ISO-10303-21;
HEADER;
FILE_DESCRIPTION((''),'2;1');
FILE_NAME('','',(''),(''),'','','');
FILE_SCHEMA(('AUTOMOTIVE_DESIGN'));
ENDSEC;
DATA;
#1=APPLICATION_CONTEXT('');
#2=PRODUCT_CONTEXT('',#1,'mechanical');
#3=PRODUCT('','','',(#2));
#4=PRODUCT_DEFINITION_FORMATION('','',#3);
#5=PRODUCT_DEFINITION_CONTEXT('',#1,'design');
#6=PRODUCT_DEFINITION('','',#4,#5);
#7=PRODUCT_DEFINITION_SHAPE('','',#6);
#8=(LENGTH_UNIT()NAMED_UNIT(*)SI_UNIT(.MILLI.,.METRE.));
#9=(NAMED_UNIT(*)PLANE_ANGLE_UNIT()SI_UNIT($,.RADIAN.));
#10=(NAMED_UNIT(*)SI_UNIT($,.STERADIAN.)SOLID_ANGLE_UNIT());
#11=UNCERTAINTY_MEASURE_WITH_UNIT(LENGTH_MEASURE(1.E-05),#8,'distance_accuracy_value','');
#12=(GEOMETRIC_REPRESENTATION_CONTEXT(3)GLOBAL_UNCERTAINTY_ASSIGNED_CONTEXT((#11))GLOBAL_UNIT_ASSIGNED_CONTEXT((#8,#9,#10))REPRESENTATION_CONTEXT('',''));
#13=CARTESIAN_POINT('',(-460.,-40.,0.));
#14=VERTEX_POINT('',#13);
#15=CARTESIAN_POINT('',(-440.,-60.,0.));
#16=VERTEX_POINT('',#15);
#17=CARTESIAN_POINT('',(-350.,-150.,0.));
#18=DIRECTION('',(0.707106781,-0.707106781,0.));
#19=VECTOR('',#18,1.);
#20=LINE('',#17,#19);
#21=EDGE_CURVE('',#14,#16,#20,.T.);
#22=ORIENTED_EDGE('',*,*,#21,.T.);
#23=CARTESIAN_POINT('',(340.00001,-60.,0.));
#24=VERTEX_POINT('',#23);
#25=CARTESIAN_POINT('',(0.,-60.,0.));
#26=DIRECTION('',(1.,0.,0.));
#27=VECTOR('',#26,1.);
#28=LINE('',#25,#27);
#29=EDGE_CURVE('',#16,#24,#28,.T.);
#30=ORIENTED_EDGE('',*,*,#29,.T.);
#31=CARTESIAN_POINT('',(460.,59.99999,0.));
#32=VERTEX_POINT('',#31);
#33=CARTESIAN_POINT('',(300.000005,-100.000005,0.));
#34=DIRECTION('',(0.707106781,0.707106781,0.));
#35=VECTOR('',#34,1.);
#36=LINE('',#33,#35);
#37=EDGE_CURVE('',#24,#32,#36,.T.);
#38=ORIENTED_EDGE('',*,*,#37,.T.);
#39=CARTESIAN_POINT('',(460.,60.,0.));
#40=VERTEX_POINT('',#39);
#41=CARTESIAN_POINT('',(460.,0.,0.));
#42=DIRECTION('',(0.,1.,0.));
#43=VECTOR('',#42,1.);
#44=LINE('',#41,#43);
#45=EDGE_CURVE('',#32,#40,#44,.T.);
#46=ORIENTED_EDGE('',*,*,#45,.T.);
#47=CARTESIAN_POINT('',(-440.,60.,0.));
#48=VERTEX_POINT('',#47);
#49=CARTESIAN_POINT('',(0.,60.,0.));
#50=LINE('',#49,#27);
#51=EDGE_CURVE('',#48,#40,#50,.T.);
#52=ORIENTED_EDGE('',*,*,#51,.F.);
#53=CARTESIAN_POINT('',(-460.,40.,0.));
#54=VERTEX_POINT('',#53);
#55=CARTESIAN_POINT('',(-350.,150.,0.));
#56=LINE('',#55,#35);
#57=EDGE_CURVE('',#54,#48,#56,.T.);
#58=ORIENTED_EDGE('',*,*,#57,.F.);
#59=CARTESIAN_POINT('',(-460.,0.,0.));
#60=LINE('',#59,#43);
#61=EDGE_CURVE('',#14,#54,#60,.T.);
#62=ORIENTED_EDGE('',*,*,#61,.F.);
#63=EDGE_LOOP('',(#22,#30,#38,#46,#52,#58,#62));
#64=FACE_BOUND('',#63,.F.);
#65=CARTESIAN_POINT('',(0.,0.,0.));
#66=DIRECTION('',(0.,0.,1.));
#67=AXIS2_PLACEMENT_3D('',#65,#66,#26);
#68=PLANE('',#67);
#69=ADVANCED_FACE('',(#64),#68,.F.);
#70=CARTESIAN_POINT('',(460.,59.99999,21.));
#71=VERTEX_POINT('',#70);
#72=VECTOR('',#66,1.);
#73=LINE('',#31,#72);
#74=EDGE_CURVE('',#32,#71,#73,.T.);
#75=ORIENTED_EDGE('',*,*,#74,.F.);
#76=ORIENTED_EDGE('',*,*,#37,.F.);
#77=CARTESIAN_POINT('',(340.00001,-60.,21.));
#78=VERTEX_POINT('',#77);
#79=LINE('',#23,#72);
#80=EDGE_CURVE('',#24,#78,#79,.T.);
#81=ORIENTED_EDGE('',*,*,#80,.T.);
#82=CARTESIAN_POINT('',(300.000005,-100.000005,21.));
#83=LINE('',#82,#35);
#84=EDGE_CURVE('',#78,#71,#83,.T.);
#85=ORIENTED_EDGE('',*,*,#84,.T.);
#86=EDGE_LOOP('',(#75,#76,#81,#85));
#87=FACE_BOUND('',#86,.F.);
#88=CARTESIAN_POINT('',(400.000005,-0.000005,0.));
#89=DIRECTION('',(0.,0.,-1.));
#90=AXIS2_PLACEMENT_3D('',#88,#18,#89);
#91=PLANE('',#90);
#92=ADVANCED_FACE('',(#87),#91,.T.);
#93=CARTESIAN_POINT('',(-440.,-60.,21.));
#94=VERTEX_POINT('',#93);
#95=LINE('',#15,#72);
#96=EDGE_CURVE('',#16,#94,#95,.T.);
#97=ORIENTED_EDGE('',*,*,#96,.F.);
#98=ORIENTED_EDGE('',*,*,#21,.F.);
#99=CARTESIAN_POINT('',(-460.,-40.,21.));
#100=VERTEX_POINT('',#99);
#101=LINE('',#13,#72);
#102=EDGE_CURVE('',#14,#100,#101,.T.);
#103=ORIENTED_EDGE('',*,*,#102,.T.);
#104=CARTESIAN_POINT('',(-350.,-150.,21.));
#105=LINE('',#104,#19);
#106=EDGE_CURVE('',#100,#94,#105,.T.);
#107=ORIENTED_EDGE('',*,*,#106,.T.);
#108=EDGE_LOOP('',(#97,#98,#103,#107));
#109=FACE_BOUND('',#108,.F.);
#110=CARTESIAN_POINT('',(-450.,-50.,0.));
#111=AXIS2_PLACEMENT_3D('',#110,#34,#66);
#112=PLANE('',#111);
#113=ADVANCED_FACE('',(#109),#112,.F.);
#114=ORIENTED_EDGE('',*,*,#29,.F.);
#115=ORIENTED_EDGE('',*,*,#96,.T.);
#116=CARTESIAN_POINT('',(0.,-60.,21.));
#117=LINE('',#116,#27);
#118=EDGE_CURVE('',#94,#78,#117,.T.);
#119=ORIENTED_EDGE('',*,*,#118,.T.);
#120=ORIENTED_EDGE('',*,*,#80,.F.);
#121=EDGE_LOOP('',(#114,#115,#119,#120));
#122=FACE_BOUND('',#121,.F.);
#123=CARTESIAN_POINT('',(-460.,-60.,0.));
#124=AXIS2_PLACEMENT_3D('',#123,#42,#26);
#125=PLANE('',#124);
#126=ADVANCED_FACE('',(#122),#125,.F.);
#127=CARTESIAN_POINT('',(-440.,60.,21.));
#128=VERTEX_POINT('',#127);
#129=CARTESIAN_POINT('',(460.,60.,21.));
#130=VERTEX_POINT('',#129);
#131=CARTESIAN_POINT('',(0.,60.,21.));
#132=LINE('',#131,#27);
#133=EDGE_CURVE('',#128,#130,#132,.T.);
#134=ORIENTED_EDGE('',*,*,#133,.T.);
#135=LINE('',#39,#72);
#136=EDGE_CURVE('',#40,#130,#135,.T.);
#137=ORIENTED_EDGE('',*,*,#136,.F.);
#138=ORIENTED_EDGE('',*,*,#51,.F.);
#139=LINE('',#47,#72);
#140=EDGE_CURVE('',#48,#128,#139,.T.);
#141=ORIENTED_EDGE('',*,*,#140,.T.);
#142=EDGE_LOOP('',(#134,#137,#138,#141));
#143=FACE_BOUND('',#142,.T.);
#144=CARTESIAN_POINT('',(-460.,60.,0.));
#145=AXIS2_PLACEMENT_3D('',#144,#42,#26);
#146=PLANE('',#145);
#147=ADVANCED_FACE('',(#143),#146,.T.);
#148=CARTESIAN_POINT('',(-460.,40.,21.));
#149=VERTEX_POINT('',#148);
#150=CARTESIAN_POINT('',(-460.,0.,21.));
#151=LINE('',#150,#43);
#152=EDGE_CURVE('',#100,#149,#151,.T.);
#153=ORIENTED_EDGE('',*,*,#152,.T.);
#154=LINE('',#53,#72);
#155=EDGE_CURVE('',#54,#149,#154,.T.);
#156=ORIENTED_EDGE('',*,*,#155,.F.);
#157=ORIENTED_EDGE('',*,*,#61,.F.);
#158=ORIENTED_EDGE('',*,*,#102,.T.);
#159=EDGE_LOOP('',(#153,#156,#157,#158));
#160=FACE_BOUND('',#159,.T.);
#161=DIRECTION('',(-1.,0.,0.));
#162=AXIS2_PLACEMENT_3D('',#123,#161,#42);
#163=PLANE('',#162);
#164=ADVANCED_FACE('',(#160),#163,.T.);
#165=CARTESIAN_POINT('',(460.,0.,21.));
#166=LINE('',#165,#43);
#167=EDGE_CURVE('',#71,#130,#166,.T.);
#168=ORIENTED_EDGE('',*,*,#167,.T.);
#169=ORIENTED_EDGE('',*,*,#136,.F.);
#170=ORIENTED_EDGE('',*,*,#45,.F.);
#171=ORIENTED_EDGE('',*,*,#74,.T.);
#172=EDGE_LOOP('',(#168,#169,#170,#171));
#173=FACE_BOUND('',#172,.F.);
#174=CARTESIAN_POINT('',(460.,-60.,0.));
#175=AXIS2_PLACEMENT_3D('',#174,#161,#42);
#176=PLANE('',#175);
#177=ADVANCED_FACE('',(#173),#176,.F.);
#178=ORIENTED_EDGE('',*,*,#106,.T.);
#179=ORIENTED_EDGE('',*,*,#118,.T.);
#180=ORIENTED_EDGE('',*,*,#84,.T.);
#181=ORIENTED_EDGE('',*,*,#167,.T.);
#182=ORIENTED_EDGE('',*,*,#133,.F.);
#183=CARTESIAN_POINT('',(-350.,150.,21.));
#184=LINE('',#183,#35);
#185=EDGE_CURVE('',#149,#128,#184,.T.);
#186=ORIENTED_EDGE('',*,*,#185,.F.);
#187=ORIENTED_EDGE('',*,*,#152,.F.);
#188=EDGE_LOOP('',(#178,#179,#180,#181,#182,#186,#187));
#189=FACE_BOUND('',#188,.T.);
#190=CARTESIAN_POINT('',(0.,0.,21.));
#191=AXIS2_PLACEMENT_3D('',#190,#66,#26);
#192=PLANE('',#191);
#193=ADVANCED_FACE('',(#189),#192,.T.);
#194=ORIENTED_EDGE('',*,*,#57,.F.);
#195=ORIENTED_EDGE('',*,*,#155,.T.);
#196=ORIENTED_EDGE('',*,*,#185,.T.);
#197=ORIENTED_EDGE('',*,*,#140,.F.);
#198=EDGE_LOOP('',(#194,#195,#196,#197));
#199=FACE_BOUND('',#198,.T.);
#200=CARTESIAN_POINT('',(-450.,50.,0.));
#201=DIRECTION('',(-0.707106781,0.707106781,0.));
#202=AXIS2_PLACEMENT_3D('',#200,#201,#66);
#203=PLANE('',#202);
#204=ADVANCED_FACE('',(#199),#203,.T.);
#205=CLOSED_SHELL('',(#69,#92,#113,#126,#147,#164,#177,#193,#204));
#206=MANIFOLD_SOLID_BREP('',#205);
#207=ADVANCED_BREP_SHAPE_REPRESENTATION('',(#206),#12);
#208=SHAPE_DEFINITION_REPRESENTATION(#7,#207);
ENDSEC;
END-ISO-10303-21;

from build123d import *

# Parameters (mm, degrees)
F0_W     = 920
F0_H     = 120
F1_DEPTH = 21
F2_SIZE  = 20
F3_SIZE  = 119.99999


# Not quite as in the source:
# - a fillet or chamfer is up to 0.001 mm smaller than in the source, because OpenCascade refuses the exact size


with BuildPart() as f1:
    # F0 (on Top) → F1 (new body)
    with BuildSketch(Plane.XY):
        Rectangle(F0_W, F0_H)
    extrude(amount=F1_DEPTH)

    # F2
    f2_edges = [f1.edges().sort_by_distance(p)[0] for p in [
        (-460, 60, 10.5),
        (-460, -60, 10.5),
    ]]
    chamfer(f2_edges, length=F2_SIZE)

    # F3 (size 120 in the source; OpenCascade refuses exactly that, so slightly less here)
    f3_edges = [f1.edges().sort_by_distance(p)[0] for p in [
        (460, -60, 10.5),
    ]]
    chamfer(f3_edges, length=F3_SIZE)


solid = f1.part
